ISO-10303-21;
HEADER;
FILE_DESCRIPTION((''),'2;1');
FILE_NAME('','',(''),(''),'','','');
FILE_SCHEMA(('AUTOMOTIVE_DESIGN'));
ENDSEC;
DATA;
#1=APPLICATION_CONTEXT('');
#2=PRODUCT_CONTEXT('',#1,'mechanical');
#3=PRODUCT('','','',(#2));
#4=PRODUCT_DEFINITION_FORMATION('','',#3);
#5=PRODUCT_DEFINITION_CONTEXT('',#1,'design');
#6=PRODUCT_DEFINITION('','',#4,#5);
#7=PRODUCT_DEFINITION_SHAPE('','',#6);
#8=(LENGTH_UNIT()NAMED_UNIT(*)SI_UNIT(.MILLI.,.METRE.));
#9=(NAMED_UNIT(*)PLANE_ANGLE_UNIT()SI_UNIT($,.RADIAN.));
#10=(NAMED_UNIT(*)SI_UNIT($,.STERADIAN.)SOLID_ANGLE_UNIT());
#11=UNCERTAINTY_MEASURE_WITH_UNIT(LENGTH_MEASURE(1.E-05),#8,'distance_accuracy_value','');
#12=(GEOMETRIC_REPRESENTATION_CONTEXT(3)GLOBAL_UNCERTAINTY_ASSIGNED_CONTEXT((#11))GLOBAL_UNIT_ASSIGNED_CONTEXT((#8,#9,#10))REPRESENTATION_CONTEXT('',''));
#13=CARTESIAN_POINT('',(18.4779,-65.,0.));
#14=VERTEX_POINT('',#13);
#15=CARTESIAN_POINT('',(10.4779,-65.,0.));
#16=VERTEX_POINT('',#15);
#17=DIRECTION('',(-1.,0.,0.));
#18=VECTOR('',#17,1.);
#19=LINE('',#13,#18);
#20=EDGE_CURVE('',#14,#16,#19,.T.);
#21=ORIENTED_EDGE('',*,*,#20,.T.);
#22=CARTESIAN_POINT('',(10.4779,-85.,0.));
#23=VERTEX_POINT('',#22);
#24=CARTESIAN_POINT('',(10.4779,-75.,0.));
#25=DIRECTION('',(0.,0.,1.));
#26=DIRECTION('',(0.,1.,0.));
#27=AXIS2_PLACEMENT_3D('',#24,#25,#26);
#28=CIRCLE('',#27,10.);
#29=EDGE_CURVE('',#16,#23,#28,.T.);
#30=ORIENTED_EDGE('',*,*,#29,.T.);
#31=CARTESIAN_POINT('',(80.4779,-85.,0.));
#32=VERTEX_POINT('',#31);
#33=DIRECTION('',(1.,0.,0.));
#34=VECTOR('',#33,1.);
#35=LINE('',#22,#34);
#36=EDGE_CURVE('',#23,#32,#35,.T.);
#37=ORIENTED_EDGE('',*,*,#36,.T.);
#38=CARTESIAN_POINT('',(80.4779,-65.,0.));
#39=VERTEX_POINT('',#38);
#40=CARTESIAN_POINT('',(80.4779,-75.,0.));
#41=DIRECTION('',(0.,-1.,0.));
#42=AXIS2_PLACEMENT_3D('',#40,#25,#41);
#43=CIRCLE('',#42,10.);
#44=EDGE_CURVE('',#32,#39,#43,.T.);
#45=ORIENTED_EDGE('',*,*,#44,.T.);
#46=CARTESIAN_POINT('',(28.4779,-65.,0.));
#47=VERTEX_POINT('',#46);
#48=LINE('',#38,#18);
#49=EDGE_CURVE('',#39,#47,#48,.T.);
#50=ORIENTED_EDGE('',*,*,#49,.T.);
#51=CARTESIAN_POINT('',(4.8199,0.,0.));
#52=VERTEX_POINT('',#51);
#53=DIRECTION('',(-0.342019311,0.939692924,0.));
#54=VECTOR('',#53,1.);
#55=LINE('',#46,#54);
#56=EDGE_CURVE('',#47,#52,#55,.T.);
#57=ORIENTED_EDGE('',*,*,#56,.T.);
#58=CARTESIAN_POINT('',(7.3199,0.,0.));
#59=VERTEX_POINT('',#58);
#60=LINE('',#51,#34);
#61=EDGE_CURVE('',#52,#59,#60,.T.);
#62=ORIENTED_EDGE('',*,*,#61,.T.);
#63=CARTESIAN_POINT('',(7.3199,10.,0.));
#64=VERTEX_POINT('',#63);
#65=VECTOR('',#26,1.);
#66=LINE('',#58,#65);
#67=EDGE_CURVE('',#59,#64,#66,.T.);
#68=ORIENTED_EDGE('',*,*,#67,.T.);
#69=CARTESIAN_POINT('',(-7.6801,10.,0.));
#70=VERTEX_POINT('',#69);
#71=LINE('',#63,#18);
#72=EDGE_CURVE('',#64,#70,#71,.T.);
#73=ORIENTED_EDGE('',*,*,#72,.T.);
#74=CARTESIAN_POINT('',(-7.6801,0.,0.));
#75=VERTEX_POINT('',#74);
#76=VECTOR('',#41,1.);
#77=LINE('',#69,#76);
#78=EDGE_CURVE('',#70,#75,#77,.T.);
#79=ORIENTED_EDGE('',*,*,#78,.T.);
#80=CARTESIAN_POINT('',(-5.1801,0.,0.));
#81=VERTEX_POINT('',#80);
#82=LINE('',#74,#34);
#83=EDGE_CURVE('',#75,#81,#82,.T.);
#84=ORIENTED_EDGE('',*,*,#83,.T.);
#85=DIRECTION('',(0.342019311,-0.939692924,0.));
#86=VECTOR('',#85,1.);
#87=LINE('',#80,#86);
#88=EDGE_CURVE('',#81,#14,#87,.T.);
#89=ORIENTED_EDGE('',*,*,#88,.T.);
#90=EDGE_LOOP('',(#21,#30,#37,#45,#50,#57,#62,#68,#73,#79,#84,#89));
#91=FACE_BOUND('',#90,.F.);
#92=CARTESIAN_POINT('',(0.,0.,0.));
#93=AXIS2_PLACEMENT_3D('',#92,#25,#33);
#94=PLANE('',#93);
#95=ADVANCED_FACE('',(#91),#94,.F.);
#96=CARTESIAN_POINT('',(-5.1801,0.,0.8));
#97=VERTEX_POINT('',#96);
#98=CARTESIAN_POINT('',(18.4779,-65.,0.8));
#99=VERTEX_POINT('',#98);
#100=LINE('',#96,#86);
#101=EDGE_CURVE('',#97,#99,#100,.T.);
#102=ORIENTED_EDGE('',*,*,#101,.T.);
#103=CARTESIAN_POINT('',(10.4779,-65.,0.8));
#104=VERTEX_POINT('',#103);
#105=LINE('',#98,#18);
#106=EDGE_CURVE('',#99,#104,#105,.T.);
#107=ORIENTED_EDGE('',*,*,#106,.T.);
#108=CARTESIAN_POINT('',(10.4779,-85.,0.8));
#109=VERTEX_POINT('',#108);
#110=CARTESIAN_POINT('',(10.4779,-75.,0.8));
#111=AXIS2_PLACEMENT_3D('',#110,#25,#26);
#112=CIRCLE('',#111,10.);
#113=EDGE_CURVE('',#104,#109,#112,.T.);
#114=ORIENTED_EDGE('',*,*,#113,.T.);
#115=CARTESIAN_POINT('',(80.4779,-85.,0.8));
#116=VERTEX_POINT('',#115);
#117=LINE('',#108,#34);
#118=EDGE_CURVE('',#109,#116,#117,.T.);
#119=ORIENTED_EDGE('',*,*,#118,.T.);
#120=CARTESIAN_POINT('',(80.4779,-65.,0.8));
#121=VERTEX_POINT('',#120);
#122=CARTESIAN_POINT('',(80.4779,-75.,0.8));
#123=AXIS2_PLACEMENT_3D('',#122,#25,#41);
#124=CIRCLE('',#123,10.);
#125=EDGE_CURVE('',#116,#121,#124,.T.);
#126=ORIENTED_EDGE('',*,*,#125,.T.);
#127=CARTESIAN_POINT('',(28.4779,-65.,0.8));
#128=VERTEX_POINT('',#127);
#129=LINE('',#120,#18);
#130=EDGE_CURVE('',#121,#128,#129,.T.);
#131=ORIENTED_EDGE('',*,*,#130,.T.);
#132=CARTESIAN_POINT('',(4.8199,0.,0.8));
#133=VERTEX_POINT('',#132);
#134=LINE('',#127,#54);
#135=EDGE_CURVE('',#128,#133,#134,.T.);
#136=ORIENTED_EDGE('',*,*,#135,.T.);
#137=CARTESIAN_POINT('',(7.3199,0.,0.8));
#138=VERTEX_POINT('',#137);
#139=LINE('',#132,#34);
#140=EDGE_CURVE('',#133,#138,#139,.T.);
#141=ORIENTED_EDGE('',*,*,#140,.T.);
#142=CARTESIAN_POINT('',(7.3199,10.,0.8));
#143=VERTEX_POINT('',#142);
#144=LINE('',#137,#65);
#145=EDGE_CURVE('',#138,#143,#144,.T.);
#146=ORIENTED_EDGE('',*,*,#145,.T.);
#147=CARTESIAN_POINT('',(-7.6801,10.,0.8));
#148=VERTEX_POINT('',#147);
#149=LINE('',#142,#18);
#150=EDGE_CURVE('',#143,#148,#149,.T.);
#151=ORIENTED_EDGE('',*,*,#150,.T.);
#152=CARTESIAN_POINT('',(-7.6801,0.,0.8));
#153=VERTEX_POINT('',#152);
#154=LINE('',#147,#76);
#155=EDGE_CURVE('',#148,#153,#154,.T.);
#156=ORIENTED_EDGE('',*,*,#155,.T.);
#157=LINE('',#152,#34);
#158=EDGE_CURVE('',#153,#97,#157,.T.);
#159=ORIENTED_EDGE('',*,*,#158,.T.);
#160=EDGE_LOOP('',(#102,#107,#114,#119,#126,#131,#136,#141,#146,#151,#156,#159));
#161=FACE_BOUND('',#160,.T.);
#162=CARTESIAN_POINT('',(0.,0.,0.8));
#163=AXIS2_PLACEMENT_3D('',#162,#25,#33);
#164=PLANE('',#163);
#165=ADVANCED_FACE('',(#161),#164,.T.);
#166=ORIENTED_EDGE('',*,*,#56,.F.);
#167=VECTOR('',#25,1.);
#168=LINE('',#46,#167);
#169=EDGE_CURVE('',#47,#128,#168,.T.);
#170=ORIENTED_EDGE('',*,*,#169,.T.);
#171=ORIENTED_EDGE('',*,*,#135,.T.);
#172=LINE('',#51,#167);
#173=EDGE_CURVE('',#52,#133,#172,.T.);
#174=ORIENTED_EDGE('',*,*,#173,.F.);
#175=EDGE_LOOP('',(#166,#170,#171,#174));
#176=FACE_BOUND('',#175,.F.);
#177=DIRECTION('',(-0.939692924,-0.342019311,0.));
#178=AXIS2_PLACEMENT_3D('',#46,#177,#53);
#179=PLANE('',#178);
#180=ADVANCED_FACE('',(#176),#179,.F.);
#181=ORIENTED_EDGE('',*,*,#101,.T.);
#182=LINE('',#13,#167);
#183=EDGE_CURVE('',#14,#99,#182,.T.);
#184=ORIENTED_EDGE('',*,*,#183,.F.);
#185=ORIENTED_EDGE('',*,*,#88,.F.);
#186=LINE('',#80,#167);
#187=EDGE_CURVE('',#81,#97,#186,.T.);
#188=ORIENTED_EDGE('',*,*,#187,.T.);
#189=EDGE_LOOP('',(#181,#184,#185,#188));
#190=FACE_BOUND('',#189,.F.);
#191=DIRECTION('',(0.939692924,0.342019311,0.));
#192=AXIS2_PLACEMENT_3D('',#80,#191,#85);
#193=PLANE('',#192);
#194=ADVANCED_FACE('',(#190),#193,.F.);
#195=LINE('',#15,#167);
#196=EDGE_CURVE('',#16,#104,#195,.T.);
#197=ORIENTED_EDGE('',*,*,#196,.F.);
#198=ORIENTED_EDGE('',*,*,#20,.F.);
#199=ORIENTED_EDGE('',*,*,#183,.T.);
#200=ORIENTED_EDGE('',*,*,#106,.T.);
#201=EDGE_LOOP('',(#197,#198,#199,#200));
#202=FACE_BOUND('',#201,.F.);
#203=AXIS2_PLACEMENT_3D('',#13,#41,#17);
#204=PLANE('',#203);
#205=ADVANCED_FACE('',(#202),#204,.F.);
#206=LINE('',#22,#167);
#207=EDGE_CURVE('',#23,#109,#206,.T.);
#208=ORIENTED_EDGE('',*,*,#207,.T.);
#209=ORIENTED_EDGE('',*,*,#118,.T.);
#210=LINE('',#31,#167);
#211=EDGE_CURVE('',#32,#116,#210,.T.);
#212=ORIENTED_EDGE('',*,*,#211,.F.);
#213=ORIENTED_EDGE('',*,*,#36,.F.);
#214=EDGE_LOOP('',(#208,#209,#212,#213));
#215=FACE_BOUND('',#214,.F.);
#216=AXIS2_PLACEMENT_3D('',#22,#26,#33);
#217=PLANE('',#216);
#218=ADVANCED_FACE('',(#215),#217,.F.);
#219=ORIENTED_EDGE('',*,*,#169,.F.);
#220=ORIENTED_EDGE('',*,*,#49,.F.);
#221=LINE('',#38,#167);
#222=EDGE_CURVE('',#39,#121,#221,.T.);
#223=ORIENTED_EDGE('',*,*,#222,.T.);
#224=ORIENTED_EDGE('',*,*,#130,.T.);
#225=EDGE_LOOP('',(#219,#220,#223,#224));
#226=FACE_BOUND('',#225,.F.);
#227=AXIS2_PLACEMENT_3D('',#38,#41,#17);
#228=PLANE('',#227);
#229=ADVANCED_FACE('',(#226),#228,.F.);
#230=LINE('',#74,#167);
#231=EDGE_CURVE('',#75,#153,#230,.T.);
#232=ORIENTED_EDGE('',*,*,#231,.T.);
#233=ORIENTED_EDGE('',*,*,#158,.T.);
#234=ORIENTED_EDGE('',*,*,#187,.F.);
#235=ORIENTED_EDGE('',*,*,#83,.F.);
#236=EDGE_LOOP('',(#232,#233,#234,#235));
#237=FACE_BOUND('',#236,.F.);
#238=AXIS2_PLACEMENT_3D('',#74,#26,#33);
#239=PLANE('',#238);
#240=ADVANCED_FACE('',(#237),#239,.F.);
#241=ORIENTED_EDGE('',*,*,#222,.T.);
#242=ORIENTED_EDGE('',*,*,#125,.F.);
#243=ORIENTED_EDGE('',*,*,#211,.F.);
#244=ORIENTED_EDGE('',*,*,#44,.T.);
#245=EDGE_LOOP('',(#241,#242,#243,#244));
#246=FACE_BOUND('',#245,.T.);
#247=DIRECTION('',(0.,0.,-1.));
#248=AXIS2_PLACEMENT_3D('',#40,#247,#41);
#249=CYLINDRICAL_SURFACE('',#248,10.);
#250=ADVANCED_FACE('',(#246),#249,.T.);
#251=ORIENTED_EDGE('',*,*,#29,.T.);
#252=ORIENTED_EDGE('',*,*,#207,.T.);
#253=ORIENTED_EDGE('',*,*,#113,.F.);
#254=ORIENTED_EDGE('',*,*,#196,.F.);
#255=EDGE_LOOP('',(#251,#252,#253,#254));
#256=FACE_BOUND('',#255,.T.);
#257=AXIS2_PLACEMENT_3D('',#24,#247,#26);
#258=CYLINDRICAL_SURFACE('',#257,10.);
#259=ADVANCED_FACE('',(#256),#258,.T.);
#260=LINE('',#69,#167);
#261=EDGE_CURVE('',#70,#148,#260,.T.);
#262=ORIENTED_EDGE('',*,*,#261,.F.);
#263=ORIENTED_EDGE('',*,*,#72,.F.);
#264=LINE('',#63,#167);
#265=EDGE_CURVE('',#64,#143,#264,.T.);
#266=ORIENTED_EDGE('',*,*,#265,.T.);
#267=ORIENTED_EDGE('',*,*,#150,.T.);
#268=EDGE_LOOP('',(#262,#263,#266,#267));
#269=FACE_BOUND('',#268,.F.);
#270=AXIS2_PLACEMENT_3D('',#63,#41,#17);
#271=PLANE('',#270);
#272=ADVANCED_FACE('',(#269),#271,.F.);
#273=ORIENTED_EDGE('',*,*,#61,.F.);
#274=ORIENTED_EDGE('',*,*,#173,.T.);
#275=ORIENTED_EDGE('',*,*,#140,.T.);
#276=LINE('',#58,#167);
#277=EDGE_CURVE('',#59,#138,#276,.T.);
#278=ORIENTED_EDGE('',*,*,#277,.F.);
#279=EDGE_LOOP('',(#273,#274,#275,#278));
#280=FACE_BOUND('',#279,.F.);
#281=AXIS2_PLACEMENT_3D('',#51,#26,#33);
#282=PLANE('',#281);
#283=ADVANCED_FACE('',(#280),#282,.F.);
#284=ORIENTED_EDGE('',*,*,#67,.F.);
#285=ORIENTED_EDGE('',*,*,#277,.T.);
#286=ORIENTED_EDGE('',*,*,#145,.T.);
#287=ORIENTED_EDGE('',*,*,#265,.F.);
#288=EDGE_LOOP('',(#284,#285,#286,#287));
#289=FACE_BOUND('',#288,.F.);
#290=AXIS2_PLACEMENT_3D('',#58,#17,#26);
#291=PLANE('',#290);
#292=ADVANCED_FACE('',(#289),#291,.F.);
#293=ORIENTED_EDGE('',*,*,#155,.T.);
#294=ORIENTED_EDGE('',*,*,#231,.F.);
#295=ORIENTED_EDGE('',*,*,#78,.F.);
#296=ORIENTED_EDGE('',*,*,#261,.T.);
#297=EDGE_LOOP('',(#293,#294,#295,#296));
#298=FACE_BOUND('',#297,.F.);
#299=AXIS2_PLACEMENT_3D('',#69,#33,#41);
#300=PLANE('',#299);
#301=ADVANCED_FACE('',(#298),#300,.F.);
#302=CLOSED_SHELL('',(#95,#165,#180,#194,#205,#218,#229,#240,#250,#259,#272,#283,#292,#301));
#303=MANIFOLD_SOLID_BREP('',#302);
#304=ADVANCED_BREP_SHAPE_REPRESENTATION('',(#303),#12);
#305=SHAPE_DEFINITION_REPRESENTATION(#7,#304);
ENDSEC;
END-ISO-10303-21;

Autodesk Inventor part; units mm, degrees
ref_plane "YZ Plane" through (0, 0, 0) normal (1, 0, 0) x (0, 1, 0)
ref_plane "XZ Plane" through (0, 0, 0) normal (0, 1, 0) x (-1, 0, 0)
ref_plane "XY Plane" through (0, 0, 0) normal (0, 0, 1) x (1, 0, 0)
ref_plane "Płaszczyzna konstrukcyjna1" through (0, 0, 0) normal (0, 0, 1) x (1, 0, 0)
sketch "Szkic1" plane through (0, 0, 0) normal (0, 0, 1) x (1, 0, 0)
  line L0 (-7.6801, 0) -> (-5.1801, 0)
  line L1 (-5.1801, 0) -> (18.4779, -65)
  line L2 (18.4779, -65) -> (10.4779, -65)
  arc A0 (10.4779, -65) -> (10.4779, -85) centre (10.4779, -75) ccw
  line L3 (10.4779, -85) -> (80.4779, -85)
  arc A1 (80.4779, -85) -> (80.4779, -65) centre (80.4779, -75) ccw
  line L4 (80.4779, -65) -> (28.4779, -65)
  line L5 (28.4779, -65) -> (4.8199, 0)
  line L6 (4.8199, 0) -> (7.3199, 0)
  line L7 (7.3199, 0) -> (7.3199, 10)
  line L8 (7.3199, 10) -> (-7.6801, 10)
  line L9 (-7.6801, 10) -> (-7.6801, 0)
  point P0 (0, 0)
extrude "Płyta1" add sketch "Szkic1" along normal blind 0.8
equation "\"PromieńGięcia\" = Grubość"
equation "\"SzerokośćGięciaPodcięcia\" = Grubość"
equation "\"GłębokośćGięciaPodcięcia\" = 0.5 * Grubość"
equation "\"RozmiarPodcięciaNarożnika\" = 4 * Grubość"
equation "\"MinimalnaPozostałość\" = 2 * Grubość"
equation "\"PromieńPrzejścia\" = PromieńGięcia"
equation "\"Rozmiar_promienia_Jacobiego\" = Grubość"
equation "\"Wielk_odstępu\" = Grubość"
equation "\"d0\" = PromieńGięcia"
equation "\"Grubość\" = 0.8"
properties part number "club_ABS_metal"
